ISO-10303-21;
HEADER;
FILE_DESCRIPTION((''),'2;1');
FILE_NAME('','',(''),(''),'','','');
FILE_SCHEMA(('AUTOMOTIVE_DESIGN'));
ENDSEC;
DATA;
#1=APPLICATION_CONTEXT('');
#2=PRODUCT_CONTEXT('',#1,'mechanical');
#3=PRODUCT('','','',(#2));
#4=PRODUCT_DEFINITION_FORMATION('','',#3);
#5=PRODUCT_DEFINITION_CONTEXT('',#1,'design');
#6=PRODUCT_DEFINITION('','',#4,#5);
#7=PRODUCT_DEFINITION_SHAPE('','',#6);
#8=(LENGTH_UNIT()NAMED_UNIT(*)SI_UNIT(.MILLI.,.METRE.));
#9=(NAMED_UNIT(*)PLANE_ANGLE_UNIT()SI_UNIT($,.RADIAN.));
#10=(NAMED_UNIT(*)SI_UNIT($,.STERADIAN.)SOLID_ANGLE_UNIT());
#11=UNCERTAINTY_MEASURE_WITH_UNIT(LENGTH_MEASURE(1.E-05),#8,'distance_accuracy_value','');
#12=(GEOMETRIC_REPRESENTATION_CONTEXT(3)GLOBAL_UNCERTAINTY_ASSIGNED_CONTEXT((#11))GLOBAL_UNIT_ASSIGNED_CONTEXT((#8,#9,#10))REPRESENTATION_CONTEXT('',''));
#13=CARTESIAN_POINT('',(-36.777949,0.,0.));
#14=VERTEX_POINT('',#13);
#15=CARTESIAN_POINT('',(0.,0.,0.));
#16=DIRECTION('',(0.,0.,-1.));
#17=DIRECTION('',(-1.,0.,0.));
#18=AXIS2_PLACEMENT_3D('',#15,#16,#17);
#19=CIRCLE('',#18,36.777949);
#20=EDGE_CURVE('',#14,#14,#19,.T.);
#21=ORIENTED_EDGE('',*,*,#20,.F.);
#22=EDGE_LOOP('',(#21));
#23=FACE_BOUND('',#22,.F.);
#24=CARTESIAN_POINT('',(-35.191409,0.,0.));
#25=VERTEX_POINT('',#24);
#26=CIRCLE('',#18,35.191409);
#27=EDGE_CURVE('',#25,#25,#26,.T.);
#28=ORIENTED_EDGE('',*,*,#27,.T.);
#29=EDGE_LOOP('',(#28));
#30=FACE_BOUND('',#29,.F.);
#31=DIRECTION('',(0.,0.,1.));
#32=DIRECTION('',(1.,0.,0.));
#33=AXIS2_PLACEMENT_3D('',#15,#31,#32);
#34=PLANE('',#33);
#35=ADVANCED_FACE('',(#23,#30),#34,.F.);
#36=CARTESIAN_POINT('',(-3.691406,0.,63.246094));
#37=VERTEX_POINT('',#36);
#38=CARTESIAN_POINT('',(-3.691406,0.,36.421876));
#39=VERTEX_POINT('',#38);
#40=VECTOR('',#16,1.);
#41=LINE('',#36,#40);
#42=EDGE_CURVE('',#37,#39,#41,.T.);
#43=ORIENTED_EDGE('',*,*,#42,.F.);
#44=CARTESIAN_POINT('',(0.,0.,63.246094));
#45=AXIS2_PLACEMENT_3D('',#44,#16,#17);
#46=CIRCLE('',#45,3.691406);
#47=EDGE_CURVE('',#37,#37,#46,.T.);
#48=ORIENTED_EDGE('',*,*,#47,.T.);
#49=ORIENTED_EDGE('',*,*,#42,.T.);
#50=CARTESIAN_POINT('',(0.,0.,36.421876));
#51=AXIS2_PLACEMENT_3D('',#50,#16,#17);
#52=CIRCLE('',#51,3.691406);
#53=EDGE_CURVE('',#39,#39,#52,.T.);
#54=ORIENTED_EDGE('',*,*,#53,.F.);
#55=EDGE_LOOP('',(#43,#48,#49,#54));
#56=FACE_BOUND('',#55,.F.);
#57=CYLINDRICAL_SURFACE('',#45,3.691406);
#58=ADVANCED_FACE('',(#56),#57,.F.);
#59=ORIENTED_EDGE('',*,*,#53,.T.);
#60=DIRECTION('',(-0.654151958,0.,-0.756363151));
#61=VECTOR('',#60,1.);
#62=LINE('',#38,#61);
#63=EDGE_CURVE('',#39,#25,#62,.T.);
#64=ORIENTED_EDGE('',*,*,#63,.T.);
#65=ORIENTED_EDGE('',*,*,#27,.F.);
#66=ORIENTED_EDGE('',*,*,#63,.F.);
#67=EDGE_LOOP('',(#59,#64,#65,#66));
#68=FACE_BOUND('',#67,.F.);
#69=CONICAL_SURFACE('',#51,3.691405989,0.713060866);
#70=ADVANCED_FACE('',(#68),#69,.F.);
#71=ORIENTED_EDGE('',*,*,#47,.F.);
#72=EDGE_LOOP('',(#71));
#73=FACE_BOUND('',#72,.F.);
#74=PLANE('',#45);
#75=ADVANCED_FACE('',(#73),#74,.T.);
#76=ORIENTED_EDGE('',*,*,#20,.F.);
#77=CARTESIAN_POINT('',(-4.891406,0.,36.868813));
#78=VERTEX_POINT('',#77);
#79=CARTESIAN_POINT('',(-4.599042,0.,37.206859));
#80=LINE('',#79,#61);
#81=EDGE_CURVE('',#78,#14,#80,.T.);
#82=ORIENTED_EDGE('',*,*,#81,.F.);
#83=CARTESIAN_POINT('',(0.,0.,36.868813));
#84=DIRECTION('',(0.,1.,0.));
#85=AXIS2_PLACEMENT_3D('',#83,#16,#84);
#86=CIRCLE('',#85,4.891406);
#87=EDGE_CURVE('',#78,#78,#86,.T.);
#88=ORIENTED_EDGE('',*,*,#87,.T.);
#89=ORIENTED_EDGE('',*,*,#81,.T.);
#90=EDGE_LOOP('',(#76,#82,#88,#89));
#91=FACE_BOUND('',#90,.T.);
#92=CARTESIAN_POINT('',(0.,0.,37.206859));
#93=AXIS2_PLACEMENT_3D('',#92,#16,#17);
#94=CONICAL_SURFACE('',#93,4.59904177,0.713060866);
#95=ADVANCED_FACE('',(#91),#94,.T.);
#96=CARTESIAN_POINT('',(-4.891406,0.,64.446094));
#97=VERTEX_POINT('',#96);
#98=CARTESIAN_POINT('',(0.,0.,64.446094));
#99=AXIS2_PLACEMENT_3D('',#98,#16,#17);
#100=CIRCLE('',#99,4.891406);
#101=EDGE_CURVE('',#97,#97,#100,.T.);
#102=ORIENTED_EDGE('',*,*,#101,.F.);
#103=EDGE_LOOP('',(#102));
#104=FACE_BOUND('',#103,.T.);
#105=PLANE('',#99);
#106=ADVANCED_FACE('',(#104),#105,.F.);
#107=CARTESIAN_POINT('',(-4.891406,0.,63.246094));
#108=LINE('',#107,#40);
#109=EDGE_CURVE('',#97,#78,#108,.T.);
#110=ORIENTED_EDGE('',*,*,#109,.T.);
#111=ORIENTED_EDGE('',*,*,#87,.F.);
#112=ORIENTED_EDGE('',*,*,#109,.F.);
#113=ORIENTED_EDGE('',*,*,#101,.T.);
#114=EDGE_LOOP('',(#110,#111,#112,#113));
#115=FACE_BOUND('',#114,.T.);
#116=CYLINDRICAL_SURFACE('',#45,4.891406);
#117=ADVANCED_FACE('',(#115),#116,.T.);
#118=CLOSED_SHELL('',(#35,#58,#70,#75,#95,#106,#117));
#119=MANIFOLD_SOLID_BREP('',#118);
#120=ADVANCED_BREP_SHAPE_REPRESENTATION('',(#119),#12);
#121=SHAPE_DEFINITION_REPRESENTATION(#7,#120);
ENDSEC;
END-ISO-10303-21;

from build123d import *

# Parameters (mm, degrees)
F2_T     = 1.2
F4_D     = 300
F4_DEPTH = 1.201


with BuildPart() as f1:
    # F0 (on Front) → F1 (revolve)
    with BuildSketch(Plane.XZ):
        Polygon((-3.6914059892, 36.4218764007), (-35.1914092898, 0), (0, 0), (0, 63.2460936904), (-3.6914059892, 63.2460936904), align=None)
    revolve(axis=Axis((0, 0, 31.6230468452), (0, 0, -1)))

    # F2 (hollow, outwards: the wall grows on the outside; the body as it was is the cavity)
    f2_inside = f1.part
    offset(amount=F2_T, kind=Kind.INTERSECTION)
    add(f2_inside, mode=Mode.SUBTRACT)

    # F4 (through all, one way)
    with BuildSketch(Plane.XY):
        with Locations((0, 0)):
            Circle(F4_D / 2)
    extrude(amount=-F4_DEPTH, mode=Mode.SUBTRACT)


solid = f1.part
